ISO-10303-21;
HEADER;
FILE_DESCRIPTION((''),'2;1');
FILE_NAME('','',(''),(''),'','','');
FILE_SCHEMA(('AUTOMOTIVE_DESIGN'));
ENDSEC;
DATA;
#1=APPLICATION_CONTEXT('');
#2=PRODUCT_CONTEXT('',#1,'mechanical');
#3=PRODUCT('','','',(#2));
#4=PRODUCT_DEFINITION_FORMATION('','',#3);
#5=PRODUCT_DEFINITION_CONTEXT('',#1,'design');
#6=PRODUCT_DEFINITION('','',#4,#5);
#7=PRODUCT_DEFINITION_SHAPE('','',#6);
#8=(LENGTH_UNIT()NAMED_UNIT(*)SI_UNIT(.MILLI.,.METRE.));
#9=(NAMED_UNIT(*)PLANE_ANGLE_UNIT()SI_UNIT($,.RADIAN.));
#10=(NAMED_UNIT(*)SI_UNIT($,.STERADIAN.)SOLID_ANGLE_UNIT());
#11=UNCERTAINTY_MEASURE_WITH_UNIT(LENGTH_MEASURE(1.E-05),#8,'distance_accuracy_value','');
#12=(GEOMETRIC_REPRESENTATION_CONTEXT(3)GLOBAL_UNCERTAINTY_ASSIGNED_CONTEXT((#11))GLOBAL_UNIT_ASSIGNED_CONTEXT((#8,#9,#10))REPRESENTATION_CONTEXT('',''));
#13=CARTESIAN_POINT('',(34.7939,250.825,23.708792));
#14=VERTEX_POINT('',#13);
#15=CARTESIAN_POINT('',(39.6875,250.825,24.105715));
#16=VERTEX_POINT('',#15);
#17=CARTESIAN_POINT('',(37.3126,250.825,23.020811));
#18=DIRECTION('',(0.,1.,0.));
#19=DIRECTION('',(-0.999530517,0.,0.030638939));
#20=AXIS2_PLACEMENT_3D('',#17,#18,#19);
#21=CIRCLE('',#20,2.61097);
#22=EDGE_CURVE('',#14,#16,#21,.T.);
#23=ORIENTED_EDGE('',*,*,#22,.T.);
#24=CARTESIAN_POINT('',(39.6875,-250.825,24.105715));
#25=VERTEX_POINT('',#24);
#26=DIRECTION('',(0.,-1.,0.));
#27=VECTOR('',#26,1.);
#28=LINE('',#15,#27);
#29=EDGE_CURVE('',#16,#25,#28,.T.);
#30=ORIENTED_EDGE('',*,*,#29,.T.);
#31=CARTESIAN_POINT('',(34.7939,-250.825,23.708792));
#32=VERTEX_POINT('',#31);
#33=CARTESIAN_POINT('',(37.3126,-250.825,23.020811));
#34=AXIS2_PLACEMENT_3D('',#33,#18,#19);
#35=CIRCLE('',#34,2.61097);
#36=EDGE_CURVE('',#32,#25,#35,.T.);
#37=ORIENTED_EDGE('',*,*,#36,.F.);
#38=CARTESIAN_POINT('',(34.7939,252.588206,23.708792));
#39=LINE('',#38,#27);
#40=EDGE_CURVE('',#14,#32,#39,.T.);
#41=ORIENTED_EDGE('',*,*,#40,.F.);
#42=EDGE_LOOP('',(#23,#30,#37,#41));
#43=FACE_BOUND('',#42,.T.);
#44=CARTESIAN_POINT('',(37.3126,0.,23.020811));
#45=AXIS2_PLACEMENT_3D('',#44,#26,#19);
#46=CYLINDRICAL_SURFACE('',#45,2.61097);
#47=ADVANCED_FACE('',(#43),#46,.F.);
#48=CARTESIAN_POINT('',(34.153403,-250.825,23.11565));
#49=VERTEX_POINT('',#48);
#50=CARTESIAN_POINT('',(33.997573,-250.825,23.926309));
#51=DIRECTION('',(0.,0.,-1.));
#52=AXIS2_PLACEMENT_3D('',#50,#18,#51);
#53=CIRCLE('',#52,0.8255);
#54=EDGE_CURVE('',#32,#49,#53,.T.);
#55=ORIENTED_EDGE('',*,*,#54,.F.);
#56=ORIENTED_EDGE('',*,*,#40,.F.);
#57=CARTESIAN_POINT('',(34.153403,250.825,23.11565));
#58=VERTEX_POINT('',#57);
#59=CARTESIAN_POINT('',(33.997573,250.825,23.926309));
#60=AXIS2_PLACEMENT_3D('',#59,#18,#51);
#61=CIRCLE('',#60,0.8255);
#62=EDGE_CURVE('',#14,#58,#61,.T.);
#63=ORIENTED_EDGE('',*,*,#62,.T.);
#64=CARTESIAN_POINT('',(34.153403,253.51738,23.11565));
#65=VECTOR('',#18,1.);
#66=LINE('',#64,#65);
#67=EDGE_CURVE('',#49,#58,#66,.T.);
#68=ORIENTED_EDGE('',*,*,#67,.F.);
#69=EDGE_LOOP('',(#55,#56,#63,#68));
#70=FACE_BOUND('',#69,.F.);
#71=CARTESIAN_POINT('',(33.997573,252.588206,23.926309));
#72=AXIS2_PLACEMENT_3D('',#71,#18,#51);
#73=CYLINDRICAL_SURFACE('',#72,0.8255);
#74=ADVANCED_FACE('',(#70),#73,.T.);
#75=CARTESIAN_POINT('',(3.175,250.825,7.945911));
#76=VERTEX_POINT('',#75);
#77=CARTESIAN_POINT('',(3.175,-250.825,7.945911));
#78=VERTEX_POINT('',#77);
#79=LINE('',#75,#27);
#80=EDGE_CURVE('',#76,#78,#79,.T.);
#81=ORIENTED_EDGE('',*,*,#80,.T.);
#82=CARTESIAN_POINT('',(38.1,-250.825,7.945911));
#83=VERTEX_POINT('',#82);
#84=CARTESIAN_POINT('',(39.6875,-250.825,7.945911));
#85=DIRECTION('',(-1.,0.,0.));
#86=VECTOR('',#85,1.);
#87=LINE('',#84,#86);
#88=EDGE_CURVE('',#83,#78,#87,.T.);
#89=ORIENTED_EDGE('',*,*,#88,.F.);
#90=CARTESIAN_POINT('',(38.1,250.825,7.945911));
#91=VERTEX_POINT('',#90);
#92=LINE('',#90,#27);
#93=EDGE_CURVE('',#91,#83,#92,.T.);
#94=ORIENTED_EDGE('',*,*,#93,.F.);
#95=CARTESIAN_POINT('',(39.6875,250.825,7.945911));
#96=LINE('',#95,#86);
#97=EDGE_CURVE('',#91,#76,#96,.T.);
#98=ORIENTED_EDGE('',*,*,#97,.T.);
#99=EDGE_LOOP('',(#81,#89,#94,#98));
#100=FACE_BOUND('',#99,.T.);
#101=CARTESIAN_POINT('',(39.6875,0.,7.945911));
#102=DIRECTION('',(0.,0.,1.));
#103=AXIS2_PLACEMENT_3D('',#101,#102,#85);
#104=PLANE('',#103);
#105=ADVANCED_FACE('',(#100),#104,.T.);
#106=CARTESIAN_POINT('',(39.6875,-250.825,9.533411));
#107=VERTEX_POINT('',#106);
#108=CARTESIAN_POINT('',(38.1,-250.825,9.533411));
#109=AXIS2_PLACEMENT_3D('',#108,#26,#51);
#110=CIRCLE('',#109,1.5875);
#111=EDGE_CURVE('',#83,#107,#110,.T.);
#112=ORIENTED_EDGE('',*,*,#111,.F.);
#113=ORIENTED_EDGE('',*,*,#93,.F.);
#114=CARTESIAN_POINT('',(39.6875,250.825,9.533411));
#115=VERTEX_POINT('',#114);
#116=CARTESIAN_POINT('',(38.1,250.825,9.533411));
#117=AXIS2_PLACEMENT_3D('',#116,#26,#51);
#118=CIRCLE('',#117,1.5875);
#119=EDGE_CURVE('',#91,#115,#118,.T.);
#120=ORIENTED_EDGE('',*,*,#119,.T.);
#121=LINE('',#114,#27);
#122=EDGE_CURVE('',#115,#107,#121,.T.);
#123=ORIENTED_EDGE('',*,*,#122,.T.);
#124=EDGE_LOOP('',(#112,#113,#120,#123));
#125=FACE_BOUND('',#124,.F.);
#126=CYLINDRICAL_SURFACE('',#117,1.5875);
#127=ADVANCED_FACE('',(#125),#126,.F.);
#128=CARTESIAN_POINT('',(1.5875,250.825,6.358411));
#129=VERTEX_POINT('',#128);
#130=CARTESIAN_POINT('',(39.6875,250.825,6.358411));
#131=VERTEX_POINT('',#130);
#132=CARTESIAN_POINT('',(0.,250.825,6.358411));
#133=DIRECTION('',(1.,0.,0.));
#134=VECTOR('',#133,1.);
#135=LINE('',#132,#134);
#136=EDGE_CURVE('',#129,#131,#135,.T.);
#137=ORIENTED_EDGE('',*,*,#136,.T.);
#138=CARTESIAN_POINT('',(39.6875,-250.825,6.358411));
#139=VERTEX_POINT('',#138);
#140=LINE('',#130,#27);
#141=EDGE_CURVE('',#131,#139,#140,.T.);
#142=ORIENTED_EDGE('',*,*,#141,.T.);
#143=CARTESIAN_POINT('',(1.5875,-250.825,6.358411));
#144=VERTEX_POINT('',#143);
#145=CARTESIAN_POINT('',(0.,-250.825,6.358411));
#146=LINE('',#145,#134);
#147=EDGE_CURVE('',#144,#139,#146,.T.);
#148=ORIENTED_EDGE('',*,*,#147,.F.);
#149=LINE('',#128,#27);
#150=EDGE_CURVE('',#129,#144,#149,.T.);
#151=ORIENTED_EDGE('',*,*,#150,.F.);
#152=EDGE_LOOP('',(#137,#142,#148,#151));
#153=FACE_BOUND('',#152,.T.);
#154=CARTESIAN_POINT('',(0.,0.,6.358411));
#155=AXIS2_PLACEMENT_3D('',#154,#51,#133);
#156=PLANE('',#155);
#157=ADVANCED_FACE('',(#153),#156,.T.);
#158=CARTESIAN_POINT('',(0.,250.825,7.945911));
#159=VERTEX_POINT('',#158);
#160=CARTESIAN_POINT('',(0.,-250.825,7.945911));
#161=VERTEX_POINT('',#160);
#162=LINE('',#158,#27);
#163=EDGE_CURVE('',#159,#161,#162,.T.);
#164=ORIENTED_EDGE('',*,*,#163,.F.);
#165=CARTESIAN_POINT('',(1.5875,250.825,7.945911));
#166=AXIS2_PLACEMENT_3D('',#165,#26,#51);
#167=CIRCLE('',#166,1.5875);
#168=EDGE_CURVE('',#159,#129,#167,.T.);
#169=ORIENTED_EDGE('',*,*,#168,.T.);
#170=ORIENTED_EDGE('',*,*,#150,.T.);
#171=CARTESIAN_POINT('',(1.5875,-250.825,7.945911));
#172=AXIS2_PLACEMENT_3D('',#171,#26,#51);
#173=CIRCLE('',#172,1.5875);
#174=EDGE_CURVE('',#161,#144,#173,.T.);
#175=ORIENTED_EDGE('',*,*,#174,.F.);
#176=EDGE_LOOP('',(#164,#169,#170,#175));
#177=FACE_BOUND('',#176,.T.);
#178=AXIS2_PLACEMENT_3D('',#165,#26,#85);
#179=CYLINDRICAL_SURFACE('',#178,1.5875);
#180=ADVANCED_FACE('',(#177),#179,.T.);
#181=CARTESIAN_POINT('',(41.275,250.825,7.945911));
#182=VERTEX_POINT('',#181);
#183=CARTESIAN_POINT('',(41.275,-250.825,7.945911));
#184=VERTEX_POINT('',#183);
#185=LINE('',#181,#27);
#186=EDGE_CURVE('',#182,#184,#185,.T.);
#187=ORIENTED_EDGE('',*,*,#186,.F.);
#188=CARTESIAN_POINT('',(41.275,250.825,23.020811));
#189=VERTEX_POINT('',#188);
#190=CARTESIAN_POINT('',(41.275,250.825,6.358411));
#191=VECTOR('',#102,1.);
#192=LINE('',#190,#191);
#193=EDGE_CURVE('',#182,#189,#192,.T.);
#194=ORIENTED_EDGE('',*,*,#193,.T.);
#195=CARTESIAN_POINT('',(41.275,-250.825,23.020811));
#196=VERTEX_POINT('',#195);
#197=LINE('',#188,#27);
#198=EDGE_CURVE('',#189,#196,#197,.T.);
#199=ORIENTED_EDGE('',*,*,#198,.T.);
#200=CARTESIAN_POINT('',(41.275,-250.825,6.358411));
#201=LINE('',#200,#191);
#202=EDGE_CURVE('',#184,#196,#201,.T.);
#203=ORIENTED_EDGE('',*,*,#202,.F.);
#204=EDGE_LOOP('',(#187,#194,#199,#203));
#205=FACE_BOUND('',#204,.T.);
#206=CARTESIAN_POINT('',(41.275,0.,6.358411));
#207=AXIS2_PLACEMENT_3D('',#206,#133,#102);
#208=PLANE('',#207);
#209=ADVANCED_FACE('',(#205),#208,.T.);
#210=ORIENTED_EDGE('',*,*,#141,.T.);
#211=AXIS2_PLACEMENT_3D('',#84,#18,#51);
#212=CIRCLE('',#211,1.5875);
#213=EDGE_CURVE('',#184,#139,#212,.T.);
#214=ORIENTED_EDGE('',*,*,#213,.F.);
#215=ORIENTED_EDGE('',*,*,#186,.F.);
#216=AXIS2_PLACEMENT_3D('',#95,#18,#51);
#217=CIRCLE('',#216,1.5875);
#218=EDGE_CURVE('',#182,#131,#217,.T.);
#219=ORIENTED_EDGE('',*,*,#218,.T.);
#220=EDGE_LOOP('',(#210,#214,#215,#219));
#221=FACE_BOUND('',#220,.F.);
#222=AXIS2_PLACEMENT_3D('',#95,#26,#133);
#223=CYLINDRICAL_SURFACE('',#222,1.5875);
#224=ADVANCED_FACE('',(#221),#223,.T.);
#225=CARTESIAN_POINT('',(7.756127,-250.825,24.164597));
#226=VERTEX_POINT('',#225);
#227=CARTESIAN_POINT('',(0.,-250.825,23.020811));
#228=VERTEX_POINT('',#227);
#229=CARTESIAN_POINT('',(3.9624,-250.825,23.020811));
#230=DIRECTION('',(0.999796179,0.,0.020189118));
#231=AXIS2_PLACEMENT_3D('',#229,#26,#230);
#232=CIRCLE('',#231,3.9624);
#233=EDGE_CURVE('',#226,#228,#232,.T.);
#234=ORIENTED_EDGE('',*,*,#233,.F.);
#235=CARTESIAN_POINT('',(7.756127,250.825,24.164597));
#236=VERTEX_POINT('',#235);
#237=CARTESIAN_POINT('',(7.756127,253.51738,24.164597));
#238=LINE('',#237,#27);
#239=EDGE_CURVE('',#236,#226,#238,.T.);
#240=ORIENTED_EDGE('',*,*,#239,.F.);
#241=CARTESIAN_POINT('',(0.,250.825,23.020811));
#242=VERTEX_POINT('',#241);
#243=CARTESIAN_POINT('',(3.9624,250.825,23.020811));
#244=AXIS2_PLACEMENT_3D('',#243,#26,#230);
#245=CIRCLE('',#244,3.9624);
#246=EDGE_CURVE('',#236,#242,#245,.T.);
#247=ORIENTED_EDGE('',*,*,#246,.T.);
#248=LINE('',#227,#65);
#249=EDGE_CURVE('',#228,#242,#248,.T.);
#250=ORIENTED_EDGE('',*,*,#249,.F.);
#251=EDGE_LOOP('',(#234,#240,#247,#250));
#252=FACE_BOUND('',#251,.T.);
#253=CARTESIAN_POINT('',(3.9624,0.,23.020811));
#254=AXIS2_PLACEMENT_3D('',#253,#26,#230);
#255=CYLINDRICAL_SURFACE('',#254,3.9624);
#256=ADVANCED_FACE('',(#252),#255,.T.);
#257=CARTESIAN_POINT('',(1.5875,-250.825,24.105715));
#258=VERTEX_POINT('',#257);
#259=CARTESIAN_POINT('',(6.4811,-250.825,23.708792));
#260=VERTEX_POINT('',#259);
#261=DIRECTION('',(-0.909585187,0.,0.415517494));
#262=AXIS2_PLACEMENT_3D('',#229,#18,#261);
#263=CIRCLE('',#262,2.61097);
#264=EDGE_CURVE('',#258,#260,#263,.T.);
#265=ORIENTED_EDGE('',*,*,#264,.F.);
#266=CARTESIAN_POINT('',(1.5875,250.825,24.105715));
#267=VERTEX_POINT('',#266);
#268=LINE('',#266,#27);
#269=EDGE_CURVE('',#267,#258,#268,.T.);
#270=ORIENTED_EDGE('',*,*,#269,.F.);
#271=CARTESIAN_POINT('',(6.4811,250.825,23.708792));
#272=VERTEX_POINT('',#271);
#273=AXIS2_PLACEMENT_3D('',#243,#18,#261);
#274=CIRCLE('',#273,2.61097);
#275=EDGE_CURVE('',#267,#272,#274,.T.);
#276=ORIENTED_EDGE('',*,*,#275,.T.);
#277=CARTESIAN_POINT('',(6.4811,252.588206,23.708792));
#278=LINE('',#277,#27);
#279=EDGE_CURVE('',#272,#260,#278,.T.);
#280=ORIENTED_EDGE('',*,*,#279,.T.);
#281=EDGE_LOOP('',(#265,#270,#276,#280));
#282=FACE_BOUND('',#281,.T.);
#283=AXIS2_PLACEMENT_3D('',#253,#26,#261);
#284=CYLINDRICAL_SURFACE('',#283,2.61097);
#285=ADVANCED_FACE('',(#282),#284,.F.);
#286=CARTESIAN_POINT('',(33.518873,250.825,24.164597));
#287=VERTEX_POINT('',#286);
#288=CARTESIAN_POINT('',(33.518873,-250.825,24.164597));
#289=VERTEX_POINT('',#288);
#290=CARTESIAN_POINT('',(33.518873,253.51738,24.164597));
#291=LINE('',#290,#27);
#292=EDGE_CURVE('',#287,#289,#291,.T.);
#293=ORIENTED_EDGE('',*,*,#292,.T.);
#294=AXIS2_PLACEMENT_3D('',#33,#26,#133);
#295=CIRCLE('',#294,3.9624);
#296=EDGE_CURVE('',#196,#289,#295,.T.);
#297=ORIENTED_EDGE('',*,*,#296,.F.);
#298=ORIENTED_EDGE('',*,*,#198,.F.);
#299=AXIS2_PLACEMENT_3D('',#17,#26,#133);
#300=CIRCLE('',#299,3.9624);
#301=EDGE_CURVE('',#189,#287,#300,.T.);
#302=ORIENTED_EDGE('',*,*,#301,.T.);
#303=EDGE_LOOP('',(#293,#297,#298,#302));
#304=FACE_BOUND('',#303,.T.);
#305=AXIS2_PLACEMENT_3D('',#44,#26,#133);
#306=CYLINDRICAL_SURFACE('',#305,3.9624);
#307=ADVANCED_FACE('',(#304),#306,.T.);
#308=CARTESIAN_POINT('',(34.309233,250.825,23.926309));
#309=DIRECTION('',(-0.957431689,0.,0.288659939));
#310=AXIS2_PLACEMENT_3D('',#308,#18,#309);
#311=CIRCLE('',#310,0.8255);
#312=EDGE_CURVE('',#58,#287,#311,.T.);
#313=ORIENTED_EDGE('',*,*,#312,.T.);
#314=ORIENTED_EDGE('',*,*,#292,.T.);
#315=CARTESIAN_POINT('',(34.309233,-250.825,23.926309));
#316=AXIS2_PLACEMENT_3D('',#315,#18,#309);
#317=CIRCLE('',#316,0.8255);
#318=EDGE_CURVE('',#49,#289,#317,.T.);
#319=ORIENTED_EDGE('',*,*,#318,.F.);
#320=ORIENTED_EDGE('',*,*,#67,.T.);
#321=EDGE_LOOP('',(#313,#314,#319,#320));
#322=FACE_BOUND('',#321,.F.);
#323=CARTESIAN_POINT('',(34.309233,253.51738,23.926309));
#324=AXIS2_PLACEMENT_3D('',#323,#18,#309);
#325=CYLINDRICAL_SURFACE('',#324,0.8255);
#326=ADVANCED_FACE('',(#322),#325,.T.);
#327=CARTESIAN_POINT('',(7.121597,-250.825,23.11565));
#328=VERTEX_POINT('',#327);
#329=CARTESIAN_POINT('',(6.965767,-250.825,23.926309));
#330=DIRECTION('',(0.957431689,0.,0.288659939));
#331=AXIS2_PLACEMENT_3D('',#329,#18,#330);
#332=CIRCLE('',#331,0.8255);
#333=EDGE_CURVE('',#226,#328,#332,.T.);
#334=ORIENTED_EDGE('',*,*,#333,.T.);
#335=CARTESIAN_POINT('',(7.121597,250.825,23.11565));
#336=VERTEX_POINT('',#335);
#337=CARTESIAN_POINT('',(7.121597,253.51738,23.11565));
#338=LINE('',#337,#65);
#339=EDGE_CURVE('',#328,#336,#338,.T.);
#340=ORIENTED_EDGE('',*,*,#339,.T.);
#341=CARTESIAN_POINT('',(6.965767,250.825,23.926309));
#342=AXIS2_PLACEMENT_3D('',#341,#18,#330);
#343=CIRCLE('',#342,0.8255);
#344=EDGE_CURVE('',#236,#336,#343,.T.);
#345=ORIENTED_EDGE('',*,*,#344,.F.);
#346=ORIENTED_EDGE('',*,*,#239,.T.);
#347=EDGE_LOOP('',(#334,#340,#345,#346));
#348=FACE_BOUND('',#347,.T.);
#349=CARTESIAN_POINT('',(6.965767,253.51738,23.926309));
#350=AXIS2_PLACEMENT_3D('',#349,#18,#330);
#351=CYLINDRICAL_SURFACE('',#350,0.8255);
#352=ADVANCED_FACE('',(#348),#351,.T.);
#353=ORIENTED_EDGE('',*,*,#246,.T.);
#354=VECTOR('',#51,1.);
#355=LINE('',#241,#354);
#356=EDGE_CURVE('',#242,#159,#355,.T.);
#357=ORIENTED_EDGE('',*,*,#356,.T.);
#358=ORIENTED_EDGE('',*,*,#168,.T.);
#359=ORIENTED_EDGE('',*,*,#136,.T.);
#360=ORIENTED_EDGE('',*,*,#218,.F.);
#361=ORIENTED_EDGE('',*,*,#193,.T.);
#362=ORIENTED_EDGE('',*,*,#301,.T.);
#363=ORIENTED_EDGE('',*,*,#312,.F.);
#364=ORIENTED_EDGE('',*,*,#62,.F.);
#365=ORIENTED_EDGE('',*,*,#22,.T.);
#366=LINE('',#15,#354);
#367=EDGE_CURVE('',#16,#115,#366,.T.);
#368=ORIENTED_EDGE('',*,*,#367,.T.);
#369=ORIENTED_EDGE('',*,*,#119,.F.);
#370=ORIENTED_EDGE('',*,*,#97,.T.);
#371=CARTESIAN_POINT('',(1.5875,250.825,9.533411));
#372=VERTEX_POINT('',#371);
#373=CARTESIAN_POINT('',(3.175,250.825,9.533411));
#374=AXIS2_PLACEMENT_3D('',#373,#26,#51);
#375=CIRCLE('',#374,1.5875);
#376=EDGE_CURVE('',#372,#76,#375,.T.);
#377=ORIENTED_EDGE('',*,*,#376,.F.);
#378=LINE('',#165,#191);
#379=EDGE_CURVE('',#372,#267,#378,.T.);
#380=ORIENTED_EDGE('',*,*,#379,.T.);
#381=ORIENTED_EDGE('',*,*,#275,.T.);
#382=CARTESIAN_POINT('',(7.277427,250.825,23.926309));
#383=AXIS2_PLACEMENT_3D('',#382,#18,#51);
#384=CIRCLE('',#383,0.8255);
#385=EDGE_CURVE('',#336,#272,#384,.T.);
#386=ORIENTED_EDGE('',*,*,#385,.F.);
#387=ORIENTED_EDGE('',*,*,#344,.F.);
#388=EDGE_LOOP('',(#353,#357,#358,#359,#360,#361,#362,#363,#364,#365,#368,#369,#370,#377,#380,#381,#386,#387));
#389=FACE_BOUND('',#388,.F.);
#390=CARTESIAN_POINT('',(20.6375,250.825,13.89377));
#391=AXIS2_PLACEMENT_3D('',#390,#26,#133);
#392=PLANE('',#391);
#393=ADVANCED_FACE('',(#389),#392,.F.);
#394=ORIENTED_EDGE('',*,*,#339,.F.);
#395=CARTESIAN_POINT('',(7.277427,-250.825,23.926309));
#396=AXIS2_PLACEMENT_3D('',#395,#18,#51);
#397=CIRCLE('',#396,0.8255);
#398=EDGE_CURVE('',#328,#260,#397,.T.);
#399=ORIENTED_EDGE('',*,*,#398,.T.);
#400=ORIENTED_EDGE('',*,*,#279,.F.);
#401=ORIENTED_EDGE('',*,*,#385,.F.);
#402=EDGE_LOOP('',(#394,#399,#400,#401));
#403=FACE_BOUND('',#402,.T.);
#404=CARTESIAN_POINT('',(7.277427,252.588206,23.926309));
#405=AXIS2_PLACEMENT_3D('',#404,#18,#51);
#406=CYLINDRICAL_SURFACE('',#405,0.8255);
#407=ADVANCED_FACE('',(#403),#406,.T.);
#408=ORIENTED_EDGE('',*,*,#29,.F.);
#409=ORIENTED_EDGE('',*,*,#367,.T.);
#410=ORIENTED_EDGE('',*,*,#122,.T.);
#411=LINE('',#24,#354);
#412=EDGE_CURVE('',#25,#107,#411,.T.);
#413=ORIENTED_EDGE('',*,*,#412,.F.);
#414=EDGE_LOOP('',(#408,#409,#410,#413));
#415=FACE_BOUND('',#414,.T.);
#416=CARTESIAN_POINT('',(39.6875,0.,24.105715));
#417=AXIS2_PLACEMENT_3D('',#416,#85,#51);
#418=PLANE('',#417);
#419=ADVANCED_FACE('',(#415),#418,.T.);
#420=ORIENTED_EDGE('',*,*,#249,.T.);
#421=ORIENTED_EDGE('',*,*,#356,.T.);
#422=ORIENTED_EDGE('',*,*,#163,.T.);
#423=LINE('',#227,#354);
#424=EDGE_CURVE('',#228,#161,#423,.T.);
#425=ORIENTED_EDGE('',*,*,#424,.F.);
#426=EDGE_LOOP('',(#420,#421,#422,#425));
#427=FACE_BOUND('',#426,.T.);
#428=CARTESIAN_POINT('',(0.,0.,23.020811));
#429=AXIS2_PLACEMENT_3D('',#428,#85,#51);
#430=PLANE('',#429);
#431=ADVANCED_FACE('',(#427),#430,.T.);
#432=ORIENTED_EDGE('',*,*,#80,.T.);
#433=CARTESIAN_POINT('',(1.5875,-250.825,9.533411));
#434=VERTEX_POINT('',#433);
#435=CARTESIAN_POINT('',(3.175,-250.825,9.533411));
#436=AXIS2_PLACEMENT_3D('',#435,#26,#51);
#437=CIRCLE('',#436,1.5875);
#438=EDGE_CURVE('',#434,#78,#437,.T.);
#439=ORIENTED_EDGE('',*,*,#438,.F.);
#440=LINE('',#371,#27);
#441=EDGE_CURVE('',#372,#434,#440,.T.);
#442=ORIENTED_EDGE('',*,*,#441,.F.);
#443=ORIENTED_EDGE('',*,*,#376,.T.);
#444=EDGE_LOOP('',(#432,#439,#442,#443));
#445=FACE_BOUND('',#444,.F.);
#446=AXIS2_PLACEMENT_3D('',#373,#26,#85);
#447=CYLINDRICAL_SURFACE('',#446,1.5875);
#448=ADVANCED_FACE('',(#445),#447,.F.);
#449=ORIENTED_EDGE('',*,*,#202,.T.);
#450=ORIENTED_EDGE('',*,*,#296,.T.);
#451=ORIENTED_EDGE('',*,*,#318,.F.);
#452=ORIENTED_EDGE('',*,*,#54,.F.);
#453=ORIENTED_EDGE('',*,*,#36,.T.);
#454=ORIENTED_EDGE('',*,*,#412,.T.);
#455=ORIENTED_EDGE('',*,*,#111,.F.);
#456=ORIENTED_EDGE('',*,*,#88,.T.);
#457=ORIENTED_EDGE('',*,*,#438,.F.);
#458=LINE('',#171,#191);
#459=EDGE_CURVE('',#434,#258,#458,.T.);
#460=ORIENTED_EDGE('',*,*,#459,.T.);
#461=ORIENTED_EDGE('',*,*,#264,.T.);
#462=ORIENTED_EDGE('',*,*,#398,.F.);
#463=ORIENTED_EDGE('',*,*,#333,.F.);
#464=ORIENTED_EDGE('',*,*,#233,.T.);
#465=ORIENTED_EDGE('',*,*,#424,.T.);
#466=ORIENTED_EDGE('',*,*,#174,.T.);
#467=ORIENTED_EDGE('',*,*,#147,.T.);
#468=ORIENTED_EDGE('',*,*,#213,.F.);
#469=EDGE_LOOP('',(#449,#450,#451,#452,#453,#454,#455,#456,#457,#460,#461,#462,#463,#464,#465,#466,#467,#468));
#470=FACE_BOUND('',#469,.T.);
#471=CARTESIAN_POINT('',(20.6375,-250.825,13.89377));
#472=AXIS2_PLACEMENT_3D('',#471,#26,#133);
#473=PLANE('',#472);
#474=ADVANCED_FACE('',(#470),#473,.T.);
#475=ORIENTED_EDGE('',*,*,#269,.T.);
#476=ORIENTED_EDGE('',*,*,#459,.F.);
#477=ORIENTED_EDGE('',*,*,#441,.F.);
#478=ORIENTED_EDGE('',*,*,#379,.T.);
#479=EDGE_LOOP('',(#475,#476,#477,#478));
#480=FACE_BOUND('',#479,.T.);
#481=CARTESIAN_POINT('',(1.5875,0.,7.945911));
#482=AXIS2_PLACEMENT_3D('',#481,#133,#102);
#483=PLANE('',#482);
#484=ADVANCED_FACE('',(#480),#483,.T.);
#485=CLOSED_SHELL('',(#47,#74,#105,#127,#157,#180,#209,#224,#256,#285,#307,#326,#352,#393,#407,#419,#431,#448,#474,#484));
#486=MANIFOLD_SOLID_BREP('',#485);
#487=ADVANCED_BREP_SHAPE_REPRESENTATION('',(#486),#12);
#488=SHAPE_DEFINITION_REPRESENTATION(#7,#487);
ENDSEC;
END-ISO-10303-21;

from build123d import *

# Parameters (mm, degrees)
F1_DEPTH    = 250.825
F2_R        = 1.5875
F3_T1_DEPTH = 507.0347591504
F3_T3_DEPTH = 505.1764115156


# Not quite as in the source:
# - a fillet or chamfer that OpenCascade refuses, or shapes differently, is made with other operations: its cross-section is extruded or revolved along the edge and cut away or added


with BuildPart() as f1:
    # F0 (on Front) → F1 (new body, symmetric)
    with BuildSketch(Plane.XZ):
        with BuildLine():
            Line((0, 23.0208111631), (0, 6.3584111631))
            Line((0, 6.3584111631), (41.275, 6.3584111631))
            Line((41.275, 6.3584111631), (41.275, 7.9459111631))
            Line((41.275, 7.9459111631), (41.275, 23.0208111631))
            ThreePointArc((41.275, 23.0208111631), (37.3526007198, 26.9830092528), (33.3510076204, 23.1008085261))
            Line((33.3510076204, 23.1008085261), (34.7028554043, 23.1008085261))
            ThreePointArc((34.7028554043, 23.1008085261), (36.7966084578, 25.5802875082), (39.6875, 24.1057150403))
            Line((39.6875, 24.1057150403), (39.6875, 23.1008085261))
            Line((39.6875, 23.1008085261), (39.6875, 7.9459111631))
            Line((39.6875, 7.9459111631), (1.5875, 7.9459111631))
            Line((1.5875, 7.9459111631), (1.5875, 24.1057150403))
            ThreePointArc((1.5875, 24.1057150403), (4.4783915422, 25.5802875082), (6.5721445957, 23.1008085261))
            Line((6.5721445957, 23.1008085261), (7.9239923796, 23.1008085261))
            ThreePointArc((7.9239923796, 23.1008085261), (3.9223992802, 26.9830092528), (0, 23.0208111631))
        make_face()
    extrude(amount=F1_DEPTH, both=True)

    # F2
    f2_edges = [f1.edges().sort_by_distance(p)[0] for p in [
        (39.6875, 0, 7.945911),
        (1.5875, 0, 7.945911),
        (0, 0, 6.358411),
        (41.275, 0, 6.358411),
    ]]
    fillet(f2_edges, radius=F2_R)

    # F3: fillet of radius 0.8255 on 4 edges, made by hand

    # F3_s2 → F3_t1 (cut)
    with BuildSketch(Plane.XZ.offset(-253.5173795752)):
        with BuildLine():
            ThreePointArc((33.5188726746, 24.1645973059), (33.6466023062, 23.4339961952), (34.309232534, 23.1008085261))
            Line((34.309232534, 23.1008085261), (33.3510076204, 23.1008085261))
            ThreePointArc((33.3510076204, 23.1008085261), (33.3986304583, 23.6384325571), (33.5188726746, 24.1645973059))
        make_face()
        with BuildLine():
            ThreePointArc((7.7561273254, 24.1645973059), (7.6283976938, 23.4339961952), (6.965767466, 23.1008085261))
            Line((6.965767466, 23.1008085261), (7.9239923796, 23.1008085261))
            ThreePointArc((7.9239923796, 23.1008085261), (7.8763695417, 23.6384325571), (7.7561273254, 24.1645973059))
        make_face()
    extrude(amount=F3_T1_DEPTH, mode=Mode.SUBTRACT)

    # F3_s4 → F3_t3 (cut)
    with BuildSketch(Plane.XZ.offset(-252.5882057578)):
        with BuildLine():
            ThreePointArc((33.9975731012, 23.1008085261), (34.4985175119, 23.2701797679), (34.7939002584, 23.7087922999))
            ThreePointArc((34.7939002584, 23.7087922999), (34.7304213855, 23.4074893696), (34.7028554043, 23.1008085261))
            Line((34.7028554043, 23.1008085261), (33.9975731012, 23.1008085261))
        make_face()
        with BuildLine():
            ThreePointArc((7.2774268988, 23.1008085261), (6.7764824881, 23.2701797679), (6.4810997416, 23.7087922999))
            ThreePointArc((6.4810997416, 23.7087922999), (6.5445786145, 23.4074893696), (6.5721445957, 23.1008085261))
            Line((6.5721445957, 23.1008085261), (7.2774268988, 23.1008085261))
        make_face()
    extrude(amount=F3_T3_DEPTH, mode=Mode.SUBTRACT)


solid = f1.part
